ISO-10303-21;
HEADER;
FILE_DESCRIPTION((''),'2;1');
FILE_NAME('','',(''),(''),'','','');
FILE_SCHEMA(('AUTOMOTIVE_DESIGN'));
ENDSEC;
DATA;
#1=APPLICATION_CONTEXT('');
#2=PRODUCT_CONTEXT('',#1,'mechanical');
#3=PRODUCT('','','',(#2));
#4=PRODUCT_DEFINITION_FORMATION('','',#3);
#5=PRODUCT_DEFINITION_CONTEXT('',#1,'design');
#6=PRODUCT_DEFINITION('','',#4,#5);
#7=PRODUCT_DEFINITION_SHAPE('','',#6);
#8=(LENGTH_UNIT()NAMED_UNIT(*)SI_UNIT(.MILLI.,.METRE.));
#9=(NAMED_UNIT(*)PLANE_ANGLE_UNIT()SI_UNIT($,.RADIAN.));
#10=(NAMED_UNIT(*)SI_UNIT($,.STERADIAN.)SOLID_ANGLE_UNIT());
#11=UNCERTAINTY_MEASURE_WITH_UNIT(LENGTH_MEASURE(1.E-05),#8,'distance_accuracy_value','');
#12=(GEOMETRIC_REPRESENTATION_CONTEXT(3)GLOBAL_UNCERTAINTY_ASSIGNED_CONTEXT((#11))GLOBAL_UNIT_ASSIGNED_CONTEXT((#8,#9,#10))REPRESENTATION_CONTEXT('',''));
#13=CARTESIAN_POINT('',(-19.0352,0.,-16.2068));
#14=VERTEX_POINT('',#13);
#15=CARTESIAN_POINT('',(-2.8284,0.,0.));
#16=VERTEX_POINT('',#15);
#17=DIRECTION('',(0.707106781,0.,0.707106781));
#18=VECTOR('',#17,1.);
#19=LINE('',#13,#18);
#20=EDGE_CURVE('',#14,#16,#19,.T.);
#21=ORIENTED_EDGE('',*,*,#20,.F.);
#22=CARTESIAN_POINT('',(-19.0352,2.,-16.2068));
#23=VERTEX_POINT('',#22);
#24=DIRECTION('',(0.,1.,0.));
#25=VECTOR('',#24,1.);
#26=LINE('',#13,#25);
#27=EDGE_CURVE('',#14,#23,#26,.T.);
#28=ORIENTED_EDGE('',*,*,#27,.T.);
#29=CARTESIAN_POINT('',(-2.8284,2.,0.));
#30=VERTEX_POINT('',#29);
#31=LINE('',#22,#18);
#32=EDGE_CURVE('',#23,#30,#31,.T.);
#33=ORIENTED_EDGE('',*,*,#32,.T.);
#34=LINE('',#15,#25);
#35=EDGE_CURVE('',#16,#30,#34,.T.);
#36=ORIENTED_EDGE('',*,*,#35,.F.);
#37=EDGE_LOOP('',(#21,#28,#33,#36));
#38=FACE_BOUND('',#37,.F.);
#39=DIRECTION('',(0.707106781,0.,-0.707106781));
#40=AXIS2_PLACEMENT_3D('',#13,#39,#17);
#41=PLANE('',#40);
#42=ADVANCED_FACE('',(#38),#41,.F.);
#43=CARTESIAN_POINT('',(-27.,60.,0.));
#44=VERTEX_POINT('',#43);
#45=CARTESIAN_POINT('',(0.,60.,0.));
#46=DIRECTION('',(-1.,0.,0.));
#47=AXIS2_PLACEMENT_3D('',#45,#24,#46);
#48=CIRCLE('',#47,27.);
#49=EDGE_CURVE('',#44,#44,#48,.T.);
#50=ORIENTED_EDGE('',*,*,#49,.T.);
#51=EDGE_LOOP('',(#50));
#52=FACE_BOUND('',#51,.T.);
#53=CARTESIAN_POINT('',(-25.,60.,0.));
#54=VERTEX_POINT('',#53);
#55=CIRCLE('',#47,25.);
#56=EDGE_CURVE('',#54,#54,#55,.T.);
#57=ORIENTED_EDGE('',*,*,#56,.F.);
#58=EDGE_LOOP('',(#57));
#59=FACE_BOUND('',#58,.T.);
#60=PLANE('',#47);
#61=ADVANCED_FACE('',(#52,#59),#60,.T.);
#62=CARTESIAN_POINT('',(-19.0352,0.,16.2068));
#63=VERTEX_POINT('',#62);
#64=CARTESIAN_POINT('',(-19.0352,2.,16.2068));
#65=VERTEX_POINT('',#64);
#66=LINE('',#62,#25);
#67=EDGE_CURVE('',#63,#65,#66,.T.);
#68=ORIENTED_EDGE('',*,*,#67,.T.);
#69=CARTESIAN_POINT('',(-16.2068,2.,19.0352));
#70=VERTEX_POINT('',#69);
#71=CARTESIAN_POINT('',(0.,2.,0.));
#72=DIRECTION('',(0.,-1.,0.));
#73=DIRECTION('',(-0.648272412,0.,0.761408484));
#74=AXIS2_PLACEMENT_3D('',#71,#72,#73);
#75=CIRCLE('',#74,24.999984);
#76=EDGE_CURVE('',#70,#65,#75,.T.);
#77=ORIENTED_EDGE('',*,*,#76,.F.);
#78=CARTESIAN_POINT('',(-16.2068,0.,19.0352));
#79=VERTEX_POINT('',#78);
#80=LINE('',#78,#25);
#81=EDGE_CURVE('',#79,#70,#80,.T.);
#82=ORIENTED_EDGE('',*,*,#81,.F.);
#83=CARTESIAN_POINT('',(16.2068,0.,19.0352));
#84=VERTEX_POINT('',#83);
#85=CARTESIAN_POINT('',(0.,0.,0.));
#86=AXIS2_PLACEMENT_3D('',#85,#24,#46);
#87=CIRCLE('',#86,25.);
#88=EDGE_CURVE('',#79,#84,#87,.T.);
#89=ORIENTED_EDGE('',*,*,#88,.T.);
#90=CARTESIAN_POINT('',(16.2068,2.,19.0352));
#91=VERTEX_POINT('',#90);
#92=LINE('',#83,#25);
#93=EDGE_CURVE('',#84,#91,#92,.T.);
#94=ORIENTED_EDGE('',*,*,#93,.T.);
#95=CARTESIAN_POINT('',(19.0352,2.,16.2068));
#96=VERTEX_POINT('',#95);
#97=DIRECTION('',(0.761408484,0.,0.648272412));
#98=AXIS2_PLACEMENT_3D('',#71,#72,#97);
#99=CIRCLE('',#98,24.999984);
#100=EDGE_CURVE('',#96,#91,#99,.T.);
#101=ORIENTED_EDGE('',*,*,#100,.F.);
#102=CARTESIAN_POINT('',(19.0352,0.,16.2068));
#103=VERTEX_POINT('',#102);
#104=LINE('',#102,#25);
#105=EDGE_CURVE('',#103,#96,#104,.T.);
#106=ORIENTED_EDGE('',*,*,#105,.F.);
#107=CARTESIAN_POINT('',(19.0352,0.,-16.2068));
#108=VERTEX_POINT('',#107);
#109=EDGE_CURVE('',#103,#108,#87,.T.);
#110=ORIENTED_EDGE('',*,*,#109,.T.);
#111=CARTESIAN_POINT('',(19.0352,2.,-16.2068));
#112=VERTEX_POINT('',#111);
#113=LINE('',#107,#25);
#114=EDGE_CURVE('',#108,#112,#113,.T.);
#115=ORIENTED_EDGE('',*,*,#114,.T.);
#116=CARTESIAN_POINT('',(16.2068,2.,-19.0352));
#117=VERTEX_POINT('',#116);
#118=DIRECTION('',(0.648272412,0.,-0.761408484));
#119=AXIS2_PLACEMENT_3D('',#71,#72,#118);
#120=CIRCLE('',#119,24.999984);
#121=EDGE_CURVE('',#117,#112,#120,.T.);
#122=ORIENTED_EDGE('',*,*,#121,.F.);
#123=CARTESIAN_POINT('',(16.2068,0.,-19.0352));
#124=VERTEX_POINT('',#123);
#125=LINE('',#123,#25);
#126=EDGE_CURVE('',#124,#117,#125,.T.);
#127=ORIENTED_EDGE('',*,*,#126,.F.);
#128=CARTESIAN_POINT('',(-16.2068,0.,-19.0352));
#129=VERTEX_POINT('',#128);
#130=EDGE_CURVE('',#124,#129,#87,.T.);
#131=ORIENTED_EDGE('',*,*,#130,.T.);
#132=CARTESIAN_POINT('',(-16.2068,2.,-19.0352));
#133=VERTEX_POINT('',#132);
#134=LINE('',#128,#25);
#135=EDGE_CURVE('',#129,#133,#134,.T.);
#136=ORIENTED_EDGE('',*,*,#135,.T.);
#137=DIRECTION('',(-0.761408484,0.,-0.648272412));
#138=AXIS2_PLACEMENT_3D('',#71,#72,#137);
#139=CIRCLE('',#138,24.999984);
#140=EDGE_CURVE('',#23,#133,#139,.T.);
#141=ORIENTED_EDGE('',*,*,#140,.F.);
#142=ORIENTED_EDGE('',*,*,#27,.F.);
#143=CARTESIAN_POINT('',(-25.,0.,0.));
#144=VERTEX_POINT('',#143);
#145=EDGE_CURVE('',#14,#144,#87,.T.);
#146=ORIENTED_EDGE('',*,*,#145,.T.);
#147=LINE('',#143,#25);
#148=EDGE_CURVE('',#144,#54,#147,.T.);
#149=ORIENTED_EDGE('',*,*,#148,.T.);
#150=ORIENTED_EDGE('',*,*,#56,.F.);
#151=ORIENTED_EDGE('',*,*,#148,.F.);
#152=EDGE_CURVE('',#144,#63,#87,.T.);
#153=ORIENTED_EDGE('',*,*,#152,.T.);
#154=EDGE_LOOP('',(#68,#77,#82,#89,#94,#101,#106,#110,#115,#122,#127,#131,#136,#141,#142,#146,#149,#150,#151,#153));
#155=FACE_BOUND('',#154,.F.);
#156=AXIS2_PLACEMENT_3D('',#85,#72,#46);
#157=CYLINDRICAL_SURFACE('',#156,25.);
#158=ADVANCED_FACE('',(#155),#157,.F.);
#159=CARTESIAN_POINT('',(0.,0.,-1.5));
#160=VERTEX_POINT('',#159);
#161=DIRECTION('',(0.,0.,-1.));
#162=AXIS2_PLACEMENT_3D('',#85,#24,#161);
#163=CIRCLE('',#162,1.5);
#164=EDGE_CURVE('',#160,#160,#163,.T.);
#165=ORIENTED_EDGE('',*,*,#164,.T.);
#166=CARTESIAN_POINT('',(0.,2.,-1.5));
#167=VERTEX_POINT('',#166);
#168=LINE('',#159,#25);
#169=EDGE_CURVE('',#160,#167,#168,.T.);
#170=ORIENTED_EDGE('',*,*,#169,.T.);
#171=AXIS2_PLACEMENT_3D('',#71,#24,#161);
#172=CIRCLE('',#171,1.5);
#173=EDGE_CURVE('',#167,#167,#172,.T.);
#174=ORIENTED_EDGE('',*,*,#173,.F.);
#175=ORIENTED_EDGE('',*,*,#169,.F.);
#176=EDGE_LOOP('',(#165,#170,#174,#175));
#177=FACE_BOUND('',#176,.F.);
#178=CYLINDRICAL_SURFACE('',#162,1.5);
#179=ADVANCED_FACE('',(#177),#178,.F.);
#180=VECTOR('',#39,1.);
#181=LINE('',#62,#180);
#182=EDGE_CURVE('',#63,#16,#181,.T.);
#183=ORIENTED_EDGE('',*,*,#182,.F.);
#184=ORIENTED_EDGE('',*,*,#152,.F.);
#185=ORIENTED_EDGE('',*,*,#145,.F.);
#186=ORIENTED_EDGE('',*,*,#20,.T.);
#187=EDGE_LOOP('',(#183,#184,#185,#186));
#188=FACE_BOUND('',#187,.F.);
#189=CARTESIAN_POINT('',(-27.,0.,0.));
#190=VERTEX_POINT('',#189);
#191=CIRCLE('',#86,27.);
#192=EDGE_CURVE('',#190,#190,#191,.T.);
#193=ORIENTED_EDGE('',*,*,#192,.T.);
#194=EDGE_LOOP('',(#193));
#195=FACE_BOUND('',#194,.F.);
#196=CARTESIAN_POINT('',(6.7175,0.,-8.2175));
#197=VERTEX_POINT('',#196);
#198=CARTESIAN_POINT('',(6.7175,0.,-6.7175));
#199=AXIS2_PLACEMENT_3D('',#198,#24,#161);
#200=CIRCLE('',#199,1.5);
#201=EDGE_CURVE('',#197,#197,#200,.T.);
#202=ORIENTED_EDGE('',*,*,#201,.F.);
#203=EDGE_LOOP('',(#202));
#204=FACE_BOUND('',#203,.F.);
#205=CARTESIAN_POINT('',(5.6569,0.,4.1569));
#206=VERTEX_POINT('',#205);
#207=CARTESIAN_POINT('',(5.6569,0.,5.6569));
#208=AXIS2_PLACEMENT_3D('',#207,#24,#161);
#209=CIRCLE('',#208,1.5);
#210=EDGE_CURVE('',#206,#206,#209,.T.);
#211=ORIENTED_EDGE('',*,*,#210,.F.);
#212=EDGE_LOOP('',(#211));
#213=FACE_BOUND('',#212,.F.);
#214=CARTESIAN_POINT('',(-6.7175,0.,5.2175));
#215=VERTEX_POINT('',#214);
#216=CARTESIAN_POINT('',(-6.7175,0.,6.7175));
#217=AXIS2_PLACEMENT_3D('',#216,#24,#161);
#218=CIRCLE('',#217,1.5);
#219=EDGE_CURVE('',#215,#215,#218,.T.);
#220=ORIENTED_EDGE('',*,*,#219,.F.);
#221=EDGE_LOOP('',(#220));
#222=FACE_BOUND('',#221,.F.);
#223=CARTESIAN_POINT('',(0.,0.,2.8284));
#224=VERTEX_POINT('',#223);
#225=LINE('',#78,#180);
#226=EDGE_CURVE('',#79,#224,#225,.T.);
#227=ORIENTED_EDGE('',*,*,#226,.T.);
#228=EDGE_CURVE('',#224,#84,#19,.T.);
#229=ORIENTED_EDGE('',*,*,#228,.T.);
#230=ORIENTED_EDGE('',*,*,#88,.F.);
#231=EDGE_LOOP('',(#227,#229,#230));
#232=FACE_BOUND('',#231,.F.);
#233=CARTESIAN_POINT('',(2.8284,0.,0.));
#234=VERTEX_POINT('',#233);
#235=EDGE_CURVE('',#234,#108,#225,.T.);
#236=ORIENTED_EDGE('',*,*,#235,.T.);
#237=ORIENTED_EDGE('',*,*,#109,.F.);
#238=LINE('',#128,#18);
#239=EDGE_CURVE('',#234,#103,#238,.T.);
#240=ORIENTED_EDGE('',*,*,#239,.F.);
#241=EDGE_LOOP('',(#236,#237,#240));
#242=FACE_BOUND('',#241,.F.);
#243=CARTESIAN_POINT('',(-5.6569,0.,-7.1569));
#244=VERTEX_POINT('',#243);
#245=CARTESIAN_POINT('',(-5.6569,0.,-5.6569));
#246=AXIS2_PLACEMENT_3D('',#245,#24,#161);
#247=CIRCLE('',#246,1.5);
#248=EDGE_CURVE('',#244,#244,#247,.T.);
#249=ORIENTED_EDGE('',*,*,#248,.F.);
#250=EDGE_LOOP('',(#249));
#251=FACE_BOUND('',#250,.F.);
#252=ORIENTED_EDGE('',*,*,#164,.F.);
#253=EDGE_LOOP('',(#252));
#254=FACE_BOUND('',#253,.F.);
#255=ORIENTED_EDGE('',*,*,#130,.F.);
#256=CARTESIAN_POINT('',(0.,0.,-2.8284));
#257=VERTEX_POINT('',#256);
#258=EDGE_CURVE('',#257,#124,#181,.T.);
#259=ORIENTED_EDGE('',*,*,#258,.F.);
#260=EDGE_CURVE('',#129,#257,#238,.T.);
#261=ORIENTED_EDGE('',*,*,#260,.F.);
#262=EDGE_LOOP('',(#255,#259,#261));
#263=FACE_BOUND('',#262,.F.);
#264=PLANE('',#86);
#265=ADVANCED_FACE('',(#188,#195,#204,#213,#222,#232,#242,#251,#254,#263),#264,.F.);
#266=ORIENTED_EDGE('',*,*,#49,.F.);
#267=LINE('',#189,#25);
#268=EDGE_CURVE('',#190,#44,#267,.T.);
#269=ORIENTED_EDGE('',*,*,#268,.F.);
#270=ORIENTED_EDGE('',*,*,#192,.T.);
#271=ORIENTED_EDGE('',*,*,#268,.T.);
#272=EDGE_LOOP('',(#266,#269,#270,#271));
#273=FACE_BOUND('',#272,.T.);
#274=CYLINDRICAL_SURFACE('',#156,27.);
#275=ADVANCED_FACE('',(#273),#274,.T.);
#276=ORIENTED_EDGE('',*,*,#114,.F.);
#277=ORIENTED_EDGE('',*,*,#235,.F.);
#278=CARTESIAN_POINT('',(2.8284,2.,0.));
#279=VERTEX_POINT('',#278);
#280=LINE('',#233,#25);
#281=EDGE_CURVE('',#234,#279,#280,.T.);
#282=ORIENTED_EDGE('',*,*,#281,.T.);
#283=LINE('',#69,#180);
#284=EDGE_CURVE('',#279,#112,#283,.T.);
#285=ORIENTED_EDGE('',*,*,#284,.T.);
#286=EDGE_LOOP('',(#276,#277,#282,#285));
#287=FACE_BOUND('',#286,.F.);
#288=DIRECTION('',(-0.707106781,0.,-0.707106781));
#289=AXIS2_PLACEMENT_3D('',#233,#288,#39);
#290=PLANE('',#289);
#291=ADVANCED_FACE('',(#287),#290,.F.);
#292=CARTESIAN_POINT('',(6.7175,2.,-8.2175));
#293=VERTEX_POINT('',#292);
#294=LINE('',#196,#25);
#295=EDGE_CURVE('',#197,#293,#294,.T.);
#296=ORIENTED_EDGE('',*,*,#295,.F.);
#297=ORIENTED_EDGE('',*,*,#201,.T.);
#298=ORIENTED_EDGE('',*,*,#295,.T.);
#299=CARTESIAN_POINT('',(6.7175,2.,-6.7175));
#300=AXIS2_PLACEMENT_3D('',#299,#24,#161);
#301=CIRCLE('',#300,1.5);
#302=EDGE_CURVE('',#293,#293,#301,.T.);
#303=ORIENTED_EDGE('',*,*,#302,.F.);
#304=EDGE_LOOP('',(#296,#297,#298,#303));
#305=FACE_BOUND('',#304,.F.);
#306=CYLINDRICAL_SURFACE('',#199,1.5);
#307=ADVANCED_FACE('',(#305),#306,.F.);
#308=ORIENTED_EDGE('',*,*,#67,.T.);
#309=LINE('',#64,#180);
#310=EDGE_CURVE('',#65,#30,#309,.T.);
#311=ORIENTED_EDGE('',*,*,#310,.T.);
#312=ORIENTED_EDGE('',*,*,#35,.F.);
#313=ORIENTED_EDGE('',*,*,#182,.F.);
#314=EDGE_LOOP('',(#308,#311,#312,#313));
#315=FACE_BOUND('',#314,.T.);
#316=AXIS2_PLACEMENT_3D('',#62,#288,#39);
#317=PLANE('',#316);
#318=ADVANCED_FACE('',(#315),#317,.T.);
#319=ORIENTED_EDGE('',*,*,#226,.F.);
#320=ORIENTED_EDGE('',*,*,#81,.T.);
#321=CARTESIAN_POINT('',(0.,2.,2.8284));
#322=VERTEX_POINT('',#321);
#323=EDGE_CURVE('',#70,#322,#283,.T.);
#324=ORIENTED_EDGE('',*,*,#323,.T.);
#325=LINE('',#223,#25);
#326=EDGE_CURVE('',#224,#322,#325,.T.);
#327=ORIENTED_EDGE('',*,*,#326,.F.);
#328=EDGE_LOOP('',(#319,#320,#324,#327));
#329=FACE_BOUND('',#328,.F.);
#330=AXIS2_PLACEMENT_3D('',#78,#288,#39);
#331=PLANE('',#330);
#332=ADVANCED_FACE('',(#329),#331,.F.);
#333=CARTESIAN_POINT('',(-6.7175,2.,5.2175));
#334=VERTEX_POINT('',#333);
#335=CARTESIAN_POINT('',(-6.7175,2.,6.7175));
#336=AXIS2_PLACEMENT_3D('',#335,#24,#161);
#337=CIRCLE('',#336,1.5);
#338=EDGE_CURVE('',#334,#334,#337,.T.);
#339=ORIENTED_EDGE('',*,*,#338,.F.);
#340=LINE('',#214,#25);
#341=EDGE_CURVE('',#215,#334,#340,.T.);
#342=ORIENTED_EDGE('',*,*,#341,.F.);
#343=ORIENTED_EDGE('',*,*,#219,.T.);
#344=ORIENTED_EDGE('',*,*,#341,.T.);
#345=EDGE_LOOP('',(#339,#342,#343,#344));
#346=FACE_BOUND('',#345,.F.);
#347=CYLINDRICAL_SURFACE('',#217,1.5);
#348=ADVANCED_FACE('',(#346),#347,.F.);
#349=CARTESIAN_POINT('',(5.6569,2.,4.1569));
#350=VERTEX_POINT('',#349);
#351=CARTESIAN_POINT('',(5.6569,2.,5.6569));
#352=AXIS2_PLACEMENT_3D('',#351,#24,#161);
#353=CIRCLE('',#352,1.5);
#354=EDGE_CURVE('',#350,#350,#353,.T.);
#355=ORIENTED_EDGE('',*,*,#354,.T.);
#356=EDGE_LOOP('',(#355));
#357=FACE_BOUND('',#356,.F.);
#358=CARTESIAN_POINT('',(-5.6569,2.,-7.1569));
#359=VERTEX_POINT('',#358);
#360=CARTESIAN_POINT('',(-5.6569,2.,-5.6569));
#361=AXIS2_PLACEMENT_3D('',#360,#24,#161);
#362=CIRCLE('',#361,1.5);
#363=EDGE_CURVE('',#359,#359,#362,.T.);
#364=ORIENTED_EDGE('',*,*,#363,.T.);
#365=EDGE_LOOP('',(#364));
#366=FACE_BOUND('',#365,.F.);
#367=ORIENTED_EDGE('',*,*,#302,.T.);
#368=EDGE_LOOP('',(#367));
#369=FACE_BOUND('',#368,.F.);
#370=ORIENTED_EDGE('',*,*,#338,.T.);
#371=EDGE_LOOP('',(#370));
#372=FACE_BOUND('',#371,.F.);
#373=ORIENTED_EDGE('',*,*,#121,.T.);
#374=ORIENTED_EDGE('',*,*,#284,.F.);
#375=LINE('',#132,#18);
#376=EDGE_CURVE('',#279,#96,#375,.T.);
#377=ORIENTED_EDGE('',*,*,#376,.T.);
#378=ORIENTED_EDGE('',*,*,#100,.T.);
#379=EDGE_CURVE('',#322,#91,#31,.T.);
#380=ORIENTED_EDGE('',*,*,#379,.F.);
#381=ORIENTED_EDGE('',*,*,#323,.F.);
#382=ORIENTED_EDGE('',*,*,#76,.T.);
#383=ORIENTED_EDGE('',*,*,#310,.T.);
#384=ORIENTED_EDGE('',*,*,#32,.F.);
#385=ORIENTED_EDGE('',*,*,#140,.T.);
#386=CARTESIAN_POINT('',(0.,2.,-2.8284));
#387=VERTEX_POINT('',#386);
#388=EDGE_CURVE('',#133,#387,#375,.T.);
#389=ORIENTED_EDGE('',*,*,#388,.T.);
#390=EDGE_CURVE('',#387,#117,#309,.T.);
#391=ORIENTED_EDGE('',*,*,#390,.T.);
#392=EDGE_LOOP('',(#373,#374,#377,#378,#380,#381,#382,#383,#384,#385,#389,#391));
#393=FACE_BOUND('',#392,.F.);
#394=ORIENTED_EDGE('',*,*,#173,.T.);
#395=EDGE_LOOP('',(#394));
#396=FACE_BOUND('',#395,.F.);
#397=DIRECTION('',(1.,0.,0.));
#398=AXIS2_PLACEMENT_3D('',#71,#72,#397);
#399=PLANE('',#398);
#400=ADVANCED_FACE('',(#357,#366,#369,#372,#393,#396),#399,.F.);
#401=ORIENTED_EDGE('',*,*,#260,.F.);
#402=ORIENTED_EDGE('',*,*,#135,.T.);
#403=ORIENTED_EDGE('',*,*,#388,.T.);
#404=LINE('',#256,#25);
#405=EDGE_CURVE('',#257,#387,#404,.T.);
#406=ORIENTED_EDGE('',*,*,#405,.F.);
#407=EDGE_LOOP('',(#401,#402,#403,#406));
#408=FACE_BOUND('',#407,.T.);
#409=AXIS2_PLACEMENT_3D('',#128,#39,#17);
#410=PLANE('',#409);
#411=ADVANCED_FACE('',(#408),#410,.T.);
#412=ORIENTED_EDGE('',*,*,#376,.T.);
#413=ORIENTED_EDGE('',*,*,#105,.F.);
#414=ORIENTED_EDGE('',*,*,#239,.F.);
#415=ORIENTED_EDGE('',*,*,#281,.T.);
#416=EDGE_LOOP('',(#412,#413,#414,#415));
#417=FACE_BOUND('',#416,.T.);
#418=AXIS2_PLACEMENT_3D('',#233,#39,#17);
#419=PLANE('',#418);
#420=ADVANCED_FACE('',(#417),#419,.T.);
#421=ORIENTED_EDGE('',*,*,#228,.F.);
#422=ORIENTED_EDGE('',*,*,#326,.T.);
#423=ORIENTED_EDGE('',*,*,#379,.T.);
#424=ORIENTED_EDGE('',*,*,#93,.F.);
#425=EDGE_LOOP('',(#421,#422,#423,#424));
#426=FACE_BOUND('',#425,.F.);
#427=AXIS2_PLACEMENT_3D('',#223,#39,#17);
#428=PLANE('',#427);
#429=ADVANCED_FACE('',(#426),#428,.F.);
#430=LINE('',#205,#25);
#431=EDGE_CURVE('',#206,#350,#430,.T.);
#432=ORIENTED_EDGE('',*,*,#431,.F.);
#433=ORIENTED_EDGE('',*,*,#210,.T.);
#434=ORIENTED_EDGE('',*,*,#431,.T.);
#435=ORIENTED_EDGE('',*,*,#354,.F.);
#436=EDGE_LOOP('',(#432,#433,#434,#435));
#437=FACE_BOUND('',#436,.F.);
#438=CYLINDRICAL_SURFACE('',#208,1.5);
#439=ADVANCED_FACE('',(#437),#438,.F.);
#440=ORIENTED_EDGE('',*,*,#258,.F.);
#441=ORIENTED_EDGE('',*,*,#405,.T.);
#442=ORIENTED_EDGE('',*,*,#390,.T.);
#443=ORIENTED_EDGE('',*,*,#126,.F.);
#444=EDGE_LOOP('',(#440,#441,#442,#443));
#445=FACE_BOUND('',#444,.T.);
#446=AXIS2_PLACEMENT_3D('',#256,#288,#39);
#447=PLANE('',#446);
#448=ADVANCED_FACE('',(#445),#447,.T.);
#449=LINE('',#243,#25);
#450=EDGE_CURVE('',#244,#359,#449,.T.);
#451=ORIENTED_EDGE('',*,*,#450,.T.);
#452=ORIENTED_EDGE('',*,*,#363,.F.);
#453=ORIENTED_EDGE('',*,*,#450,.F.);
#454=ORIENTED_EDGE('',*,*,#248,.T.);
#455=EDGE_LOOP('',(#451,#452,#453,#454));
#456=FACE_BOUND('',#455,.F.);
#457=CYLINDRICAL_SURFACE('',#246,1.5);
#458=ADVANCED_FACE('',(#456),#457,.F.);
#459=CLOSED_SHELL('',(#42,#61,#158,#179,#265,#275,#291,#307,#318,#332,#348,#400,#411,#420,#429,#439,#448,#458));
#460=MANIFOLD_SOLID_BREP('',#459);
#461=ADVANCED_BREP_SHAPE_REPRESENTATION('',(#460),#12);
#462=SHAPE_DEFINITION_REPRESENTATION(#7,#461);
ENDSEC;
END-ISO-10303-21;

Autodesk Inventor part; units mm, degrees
ref_plane "YZ Plane" through (0, 0, 0) normal (1, 0, 0) x (0, 1, 0)
ref_plane "XZ Plane" through (0, 0, 0) normal (0, 1, 0) x (-1, 0, 0)
ref_plane "XY Plane" through (0, 0, 0) normal (0, 0, 1) x (1, 0, 0)
sketch "草圖1" plane through (0, 0, 0) normal (0, 1, 0) x (-1, 0, 0)
  circle A0 centre (0, 0) radius 25
  circle A1 centre (0, 0) radius 27
  dimension "d0" = 50
  dimension "d1" = 2
extrude "擠出1" add sketch "草圖1" along normal blind 60
sketch "草圖2" plane through (0, 0, 0) normal (0, -1, 0) x (1, 0, 0)
  circle A0 centre (0, 0) radius 25 construction
  line L0 (-25, 0) -> (25, 0) construction
  line L1 (-17.6777, 17.6777) -> (17.6777, -17.6777) construction
  line L2 (-16.2068, 19.0352) -> (19.0352, -16.2068)
  line L3 (-19.0352, 16.2068) -> (16.2068, -19.0352)
  arc A1 (-16.2068, 19.0352) -> (-19.0352, 16.2068) centre (0, 0) ccw
  arc A2 (16.2068, -19.0352) -> (19.0352, -16.2068) centre (0, 0) ccw
  line L4 (-19.0352, -16.2068) -> (16.2068, 19.0352)
  arc A3 (-19.0352, -16.2068) -> (-16.2068, -19.0352) centre (0, 0) ccw
  line L5 (-16.2068, -19.0352) -> (19.0352, 16.2068)
  arc A4 (19.0352, 16.2068) -> (16.2068, 19.0352) centre (0, 0) ccw
  dimension "d10" = 45
  dimension "d11" = 2
  dimension "d14" = 90
extrude "擠出3" add sketch "草圖2" against normal blind 2
sketch "草圖5" plane through (0, 0, 0) normal (0, -1, 0) x (1, 0, 0)
  circle A0 centre (0, 0) radius 25 construction
  line L0 (17.6777, 17.6777) -> (-17.6777, -17.6777) construction
  line L1 (-17.6777, 17.6777) -> (17.6777, -17.6777) construction
  line L2 (-25, 0) -> (25, 0) construction
  arc A1 (19.0352, -16.2068) -> (19.0352, 16.2068) centre (0, 0) ccw construction
  point P0 (5.6569, 5.6569)
  point P1 (-6.7175, 6.7175)
  point P2 (0, 0)
  point P3 (-5.6569, -5.6569)
  point P4 (6.7175, -6.7175)
  dimension "d18" = 45
  dimension "d19" = 45
  dimension "d20" = 9.5
  dimension "d21" = 8
  dimension "d24" = 180
hole "孔1" at (0, 0, 0) at (5.6569, 0, 5.6569) at (-6.7175, 0, 6.7175) at (-5.6569, 0, -5.6569) at (6.7175, 0, -6.7175) direction (0, 1, 0) diameter 3 end through all
